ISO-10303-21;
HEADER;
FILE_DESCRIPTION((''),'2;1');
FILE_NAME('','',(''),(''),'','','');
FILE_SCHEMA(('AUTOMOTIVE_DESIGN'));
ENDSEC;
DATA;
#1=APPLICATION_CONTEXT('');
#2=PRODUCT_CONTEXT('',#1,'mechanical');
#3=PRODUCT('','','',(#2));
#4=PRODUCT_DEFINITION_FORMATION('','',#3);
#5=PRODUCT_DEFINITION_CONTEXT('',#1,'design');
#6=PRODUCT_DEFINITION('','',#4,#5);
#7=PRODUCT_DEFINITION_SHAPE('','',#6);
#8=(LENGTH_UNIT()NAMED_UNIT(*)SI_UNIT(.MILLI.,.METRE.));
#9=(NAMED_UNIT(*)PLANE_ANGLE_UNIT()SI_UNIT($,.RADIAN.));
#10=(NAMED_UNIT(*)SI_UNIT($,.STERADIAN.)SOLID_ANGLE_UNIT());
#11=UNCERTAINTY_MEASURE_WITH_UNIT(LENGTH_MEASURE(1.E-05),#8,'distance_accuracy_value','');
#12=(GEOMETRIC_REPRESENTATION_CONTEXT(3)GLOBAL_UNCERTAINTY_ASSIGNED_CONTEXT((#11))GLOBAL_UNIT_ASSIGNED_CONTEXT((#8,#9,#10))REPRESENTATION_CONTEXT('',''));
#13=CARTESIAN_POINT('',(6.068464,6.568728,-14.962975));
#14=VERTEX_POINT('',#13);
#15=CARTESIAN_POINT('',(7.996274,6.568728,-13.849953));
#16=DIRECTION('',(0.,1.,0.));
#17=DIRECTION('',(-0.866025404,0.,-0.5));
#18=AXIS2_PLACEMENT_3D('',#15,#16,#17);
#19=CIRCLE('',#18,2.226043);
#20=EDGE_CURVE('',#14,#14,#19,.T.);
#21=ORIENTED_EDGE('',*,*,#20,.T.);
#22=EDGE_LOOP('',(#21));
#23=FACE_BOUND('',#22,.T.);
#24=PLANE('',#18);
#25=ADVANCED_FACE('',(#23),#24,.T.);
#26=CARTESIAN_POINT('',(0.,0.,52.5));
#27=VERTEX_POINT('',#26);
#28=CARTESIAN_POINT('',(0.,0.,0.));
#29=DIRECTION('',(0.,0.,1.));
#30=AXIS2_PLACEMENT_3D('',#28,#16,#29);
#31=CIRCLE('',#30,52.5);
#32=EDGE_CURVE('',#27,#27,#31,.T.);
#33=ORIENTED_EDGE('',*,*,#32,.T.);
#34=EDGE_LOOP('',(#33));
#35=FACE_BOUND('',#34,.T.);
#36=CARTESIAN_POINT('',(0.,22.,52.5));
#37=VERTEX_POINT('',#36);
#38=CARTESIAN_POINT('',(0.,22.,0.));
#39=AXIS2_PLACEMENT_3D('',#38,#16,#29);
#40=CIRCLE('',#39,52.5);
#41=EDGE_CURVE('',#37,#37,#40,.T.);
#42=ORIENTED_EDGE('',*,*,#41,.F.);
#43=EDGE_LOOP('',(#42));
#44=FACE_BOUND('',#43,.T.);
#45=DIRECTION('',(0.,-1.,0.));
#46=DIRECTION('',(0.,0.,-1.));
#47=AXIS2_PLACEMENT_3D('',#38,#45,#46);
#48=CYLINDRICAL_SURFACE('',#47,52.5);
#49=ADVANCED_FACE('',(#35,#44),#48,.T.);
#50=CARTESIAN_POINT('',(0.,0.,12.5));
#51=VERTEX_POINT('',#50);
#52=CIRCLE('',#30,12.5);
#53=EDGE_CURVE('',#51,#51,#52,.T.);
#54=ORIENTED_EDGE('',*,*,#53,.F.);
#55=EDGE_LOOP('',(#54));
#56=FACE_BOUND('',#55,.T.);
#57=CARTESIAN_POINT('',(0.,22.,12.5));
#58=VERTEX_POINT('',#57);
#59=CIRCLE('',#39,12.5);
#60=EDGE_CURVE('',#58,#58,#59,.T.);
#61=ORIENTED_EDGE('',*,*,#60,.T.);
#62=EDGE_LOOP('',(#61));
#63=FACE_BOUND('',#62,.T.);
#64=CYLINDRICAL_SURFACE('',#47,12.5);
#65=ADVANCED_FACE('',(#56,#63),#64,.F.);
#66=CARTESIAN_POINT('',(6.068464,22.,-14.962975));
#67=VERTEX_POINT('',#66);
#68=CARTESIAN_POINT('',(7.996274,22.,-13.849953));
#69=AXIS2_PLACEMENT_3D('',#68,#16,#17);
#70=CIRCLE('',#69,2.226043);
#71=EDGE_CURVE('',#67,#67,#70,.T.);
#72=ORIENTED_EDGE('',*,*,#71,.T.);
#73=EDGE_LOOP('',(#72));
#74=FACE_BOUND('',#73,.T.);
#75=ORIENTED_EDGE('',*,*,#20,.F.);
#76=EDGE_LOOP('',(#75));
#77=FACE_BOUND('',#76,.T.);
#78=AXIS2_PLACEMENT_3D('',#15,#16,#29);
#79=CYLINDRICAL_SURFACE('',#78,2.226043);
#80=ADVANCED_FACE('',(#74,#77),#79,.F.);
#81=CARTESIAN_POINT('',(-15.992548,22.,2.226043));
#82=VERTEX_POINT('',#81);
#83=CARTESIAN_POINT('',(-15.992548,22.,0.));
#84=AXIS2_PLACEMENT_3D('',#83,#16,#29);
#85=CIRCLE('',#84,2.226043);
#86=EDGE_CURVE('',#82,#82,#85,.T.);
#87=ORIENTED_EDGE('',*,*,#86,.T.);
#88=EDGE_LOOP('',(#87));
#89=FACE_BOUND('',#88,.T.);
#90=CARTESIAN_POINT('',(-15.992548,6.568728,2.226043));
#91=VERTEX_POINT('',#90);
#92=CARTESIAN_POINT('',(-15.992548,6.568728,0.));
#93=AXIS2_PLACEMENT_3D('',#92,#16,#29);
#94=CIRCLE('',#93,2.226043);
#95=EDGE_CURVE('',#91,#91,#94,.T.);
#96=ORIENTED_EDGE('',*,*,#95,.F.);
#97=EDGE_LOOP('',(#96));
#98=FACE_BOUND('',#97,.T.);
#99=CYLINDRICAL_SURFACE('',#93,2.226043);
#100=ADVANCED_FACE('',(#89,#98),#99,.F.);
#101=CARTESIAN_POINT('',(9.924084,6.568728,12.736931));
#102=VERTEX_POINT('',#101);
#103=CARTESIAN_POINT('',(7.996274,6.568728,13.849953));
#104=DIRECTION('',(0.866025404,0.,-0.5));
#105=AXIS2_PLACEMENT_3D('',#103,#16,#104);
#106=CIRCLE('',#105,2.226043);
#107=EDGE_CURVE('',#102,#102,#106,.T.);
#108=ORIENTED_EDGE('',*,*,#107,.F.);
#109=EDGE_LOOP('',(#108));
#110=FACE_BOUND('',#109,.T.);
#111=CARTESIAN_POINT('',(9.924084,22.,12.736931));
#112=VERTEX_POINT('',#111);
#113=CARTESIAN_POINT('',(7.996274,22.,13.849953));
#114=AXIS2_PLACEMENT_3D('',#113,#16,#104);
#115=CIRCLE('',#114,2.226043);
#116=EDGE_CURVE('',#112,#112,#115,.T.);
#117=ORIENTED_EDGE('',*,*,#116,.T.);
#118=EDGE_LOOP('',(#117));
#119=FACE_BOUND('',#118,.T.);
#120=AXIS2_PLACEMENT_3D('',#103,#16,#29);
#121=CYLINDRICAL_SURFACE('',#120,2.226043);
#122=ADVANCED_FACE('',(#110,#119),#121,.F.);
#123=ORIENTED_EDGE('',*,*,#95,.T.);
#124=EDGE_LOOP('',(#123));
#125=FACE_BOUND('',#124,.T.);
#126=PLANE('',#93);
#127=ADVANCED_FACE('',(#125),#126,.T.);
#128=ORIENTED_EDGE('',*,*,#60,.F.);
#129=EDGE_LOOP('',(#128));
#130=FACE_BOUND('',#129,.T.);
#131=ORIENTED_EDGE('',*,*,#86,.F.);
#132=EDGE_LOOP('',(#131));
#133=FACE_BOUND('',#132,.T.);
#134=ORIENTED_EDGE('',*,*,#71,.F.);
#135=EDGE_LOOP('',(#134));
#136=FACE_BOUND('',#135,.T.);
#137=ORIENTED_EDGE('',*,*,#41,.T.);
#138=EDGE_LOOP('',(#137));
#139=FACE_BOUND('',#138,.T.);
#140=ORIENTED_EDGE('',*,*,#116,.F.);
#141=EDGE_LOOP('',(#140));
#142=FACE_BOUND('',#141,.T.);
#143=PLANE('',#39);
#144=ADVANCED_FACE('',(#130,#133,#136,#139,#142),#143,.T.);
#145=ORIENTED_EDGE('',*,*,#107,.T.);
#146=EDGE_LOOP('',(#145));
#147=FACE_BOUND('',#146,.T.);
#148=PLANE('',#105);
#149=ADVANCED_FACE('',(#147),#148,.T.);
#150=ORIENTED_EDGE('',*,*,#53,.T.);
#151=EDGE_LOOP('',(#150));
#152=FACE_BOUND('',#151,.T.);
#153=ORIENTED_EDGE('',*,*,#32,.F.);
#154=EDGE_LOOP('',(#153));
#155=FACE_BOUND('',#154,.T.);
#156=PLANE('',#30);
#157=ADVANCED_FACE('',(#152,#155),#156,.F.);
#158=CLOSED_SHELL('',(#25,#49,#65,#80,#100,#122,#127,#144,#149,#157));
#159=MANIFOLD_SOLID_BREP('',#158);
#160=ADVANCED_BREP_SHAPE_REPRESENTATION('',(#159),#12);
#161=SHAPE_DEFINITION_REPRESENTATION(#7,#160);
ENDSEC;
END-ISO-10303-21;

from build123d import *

# Parameters (mm, degrees)
SKETCH1_R           = 52.5
BOSS_EXTRUDE1_DEPTH = 22
SKETCH2_R           = 12.5
CUT_EXTRUDE1_DEPTH  = 78.437071226
SKETCH3_R           = 2.226043152
CUT_EXTRUDE2_DEPTH  = 15.431271762
CIRPATTERN1_COUNT   = 3


with BuildPart() as part:
    # Sketch1 → Boss-Extrude1 (new body)
    with BuildSketch(Plane(origin=(0, 0, 0), x_dir=(1, 0, 0), z_dir=(0, 1, 0))):
        Circle(SKETCH1_R)
    extrude(amount=BOSS_EXTRUDE1_DEPTH)

    # Sketch2 → Cut-Extrude1 (cut, through all)
    with BuildSketch(Plane(origin=(0, 0, 0), x_dir=(1, 0, 0), z_dir=(0, 1, 0))):
        Circle(SKETCH2_R)
    extrude(amount=CUT_EXTRUDE1_DEPTH, mode=Mode.SUBTRACT)

    # Sketch3 → Cut-Extrude2 (cut)
    with BuildSketch(Plane(origin=(0, 22, 0), x_dir=(1, 0, 0), z_dir=(0, 1, 0))):
        with Locations((-15.992548242, 0)):
            Circle(SKETCH3_R)
    cut_extrude2 = extrude(amount=-CUT_EXTRUDE2_DEPTH, mode=Mode.SUBTRACT)

    # CirPattern1: Cut-Extrude2 ×3 about axis
    cirpattern1_axis = Axis((0, 0, 0), (0, 1, 0))
    for i in range(1, CIRPATTERN1_COUNT):
        add(cut_extrude2.rotate(cirpattern1_axis, i * 360 / CIRPATTERN1_COUNT), mode=Mode.SUBTRACT)


solid = part.part
